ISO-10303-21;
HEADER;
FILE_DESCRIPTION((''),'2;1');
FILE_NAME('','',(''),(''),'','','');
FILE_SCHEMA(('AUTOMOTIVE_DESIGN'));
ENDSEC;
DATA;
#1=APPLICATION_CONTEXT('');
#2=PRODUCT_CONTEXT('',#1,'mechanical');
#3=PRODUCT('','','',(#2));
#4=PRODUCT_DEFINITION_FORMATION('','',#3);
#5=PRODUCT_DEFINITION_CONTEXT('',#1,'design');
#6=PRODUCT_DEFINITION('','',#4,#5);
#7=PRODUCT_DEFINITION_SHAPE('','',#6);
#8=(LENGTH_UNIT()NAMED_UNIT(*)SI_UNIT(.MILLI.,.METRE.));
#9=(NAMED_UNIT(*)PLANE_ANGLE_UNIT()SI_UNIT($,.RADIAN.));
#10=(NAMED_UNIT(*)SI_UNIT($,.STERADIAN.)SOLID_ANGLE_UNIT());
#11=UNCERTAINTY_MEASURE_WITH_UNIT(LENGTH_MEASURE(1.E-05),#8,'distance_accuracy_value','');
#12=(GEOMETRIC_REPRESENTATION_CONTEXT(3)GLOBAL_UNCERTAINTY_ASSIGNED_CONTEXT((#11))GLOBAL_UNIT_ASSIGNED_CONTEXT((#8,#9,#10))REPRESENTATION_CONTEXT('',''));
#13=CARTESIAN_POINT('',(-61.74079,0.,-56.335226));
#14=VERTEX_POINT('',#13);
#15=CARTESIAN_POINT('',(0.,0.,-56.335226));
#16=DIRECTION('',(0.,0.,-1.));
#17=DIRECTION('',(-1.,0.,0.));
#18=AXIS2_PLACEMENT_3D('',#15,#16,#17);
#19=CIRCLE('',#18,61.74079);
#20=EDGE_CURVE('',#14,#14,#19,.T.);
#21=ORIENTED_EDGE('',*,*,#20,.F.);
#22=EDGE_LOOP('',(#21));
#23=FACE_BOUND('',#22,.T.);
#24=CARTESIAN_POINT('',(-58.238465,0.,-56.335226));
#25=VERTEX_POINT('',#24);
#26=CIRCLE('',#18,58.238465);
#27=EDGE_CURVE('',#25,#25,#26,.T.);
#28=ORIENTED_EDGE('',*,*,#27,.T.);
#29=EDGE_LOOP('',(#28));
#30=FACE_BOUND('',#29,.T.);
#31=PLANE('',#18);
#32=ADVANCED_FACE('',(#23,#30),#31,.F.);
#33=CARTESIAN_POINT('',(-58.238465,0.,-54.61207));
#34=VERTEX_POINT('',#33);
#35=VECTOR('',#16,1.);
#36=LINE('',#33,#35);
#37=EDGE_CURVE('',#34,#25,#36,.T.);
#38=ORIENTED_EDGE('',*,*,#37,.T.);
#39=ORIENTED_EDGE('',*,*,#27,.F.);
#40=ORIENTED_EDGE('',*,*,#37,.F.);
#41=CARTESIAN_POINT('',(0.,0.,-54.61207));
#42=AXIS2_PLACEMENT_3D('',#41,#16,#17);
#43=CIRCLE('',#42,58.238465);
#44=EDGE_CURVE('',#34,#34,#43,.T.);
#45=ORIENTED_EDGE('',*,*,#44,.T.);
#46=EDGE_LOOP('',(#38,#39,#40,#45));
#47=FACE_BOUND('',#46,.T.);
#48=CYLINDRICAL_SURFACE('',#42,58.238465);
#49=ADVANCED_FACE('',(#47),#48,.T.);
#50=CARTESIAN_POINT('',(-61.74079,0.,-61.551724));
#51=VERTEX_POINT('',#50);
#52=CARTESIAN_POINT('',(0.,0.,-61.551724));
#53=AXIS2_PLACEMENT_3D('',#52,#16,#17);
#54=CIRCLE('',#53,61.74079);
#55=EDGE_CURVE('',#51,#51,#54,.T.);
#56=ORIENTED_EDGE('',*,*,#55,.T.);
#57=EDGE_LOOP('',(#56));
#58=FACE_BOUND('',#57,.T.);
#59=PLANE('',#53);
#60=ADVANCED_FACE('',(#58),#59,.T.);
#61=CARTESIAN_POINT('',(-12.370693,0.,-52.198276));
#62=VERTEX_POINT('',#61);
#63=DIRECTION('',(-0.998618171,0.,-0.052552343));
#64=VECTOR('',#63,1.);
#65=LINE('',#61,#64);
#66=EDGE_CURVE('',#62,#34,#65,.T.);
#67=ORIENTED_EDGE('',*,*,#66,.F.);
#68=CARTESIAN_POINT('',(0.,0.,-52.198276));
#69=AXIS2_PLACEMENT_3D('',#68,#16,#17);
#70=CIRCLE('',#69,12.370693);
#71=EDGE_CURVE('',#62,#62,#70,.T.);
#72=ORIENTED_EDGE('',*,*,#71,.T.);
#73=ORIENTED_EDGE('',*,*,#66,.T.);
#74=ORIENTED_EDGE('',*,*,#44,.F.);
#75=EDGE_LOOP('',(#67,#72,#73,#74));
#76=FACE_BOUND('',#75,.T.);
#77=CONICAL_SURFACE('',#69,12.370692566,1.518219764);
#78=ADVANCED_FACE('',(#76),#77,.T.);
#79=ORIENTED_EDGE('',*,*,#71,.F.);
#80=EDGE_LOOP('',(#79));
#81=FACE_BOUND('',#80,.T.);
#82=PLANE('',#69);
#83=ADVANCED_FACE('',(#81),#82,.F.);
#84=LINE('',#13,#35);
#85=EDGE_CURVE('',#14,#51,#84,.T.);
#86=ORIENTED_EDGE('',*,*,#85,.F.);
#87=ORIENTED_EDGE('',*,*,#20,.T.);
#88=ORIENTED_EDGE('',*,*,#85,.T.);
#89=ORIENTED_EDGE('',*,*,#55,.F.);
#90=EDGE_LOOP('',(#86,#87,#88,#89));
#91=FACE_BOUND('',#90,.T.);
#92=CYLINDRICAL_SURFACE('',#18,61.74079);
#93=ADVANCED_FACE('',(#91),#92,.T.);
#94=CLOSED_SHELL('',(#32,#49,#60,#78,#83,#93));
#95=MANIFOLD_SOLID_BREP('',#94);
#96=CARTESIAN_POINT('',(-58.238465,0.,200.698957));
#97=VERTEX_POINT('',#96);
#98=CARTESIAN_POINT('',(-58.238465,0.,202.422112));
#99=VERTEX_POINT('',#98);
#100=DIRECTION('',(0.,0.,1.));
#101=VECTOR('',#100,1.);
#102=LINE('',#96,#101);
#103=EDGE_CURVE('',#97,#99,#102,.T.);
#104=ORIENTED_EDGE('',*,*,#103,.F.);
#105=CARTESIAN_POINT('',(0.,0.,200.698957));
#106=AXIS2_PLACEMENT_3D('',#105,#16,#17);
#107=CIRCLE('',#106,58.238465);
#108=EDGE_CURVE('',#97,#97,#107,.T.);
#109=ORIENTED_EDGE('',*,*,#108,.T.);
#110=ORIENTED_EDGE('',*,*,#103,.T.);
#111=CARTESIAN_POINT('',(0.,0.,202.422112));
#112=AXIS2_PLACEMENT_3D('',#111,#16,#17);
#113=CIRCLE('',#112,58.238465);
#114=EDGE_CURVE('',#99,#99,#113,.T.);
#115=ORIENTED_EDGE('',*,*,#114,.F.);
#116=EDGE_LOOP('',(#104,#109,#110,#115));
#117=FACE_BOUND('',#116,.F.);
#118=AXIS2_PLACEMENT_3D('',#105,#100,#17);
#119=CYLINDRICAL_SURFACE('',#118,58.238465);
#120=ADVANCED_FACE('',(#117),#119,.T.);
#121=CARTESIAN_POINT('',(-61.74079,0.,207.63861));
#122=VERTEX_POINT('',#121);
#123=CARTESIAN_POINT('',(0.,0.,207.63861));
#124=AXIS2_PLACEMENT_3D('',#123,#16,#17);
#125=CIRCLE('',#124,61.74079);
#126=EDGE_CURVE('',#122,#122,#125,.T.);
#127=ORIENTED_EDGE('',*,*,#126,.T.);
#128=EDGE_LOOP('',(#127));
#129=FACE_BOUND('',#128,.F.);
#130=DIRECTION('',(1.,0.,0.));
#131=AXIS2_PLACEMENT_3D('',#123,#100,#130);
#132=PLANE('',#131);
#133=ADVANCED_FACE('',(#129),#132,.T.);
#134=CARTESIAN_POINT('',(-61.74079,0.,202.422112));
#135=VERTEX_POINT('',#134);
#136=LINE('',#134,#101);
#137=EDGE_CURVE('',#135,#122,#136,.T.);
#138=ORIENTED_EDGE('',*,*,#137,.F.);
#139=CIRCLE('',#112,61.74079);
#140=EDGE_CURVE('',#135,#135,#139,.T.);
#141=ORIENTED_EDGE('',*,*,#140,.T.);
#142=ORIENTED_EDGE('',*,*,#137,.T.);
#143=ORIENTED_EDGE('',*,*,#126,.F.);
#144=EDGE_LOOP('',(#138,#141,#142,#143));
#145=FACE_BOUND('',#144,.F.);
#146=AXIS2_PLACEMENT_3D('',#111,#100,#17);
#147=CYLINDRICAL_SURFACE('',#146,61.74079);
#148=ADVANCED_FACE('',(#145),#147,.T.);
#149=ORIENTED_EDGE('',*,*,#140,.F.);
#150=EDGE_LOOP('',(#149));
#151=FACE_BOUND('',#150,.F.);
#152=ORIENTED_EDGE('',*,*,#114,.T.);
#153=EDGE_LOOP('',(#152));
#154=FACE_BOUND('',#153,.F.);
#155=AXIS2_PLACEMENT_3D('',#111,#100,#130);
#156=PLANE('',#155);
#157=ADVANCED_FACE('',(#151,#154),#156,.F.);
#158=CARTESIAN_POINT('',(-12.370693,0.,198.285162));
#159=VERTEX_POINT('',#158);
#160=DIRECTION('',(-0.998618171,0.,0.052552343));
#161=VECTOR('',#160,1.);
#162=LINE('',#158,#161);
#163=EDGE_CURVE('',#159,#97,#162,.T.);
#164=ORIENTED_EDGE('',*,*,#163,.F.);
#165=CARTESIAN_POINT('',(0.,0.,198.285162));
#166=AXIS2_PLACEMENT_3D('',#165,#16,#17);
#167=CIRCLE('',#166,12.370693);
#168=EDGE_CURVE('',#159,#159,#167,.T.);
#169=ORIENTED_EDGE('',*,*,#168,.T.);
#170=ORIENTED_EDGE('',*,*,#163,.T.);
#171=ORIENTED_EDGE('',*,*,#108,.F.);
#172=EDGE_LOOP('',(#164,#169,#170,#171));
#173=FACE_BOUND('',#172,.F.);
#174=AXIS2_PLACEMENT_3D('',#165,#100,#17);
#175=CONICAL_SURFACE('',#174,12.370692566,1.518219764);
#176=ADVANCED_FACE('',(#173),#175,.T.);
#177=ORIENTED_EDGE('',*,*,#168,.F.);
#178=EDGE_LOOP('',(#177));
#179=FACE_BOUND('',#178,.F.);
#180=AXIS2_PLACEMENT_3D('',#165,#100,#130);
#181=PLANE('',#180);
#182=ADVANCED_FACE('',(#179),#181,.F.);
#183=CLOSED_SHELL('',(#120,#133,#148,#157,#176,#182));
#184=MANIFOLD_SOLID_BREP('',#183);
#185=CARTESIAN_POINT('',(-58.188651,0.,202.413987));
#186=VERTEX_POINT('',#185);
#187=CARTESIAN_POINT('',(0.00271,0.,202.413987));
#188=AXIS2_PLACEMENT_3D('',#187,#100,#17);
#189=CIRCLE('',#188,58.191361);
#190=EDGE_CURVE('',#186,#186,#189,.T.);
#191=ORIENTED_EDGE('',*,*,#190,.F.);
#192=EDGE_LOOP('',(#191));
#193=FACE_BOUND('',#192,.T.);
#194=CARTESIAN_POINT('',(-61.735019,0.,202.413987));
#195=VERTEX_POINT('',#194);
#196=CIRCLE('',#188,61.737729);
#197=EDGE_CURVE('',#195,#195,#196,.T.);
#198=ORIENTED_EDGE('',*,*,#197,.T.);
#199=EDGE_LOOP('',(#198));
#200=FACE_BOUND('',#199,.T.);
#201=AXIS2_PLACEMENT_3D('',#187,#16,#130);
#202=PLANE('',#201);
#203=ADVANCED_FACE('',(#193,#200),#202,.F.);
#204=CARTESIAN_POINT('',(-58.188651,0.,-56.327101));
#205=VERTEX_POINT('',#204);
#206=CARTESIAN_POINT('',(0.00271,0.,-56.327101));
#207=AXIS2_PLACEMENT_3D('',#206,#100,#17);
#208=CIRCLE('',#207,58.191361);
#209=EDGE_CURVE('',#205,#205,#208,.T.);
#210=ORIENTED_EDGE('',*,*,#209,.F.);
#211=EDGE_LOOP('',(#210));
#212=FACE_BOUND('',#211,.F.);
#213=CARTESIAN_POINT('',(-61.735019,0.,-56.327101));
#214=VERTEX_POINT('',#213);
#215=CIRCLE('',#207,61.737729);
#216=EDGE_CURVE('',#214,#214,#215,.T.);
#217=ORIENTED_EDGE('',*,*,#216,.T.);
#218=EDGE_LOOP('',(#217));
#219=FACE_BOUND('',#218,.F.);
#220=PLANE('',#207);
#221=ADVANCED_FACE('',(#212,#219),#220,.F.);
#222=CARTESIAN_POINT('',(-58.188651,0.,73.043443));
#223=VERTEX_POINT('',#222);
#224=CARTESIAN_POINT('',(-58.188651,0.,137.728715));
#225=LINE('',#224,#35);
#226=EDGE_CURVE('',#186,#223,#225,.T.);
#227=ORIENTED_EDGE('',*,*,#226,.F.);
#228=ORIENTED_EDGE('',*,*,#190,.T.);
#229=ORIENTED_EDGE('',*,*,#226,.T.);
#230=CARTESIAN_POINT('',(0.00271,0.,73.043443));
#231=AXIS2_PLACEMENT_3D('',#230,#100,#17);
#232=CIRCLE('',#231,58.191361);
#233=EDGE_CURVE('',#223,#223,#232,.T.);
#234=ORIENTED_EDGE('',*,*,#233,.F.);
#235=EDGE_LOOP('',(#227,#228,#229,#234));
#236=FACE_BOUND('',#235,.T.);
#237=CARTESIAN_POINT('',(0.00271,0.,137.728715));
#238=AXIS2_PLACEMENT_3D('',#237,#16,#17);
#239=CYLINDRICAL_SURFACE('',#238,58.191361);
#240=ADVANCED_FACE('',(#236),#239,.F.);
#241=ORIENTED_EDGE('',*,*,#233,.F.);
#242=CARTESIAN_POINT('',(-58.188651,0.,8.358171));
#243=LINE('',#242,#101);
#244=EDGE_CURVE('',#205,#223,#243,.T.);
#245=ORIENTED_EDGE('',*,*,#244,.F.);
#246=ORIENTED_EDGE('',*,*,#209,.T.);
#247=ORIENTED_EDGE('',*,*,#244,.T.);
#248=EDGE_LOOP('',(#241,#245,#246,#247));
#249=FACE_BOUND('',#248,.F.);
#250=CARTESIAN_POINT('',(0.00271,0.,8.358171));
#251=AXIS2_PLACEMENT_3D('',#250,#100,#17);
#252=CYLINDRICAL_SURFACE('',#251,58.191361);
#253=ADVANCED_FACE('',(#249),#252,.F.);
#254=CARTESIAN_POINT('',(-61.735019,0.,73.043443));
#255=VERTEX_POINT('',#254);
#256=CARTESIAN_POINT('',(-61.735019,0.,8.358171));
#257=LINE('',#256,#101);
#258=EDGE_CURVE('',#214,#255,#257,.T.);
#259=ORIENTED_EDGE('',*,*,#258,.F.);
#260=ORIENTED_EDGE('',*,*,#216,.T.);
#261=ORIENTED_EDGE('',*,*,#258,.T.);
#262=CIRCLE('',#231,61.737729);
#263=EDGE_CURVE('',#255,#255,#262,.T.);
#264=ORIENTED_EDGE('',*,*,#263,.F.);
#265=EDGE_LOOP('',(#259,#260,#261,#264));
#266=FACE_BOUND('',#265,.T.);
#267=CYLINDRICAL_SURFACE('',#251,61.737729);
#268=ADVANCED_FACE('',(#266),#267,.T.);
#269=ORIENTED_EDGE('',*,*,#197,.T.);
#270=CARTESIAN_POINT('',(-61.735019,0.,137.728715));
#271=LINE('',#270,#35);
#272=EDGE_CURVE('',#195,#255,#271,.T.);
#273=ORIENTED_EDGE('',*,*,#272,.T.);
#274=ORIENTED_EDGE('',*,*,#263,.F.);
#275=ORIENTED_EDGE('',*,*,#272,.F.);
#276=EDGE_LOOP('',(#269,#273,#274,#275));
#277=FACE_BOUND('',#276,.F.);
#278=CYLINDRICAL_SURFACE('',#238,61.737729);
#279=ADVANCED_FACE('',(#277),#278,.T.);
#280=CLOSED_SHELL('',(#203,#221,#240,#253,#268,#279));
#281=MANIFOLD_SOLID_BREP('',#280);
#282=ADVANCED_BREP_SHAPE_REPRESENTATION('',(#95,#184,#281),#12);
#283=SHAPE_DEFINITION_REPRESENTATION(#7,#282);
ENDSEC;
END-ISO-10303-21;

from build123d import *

# Parameters (mm, degrees)
F2_W = 3.5463683307
F2_H = 129.3705441058


with BuildPart() as f1:
    # F0 (on Front) → F1 (revolve)
    with BuildSketch(Plane.XZ):
        Polygon((0, -61.5517236292), (0, -54.612070322), (-58.2384653389, -54.612070322), (-58.2384653389, -56.3352257013), (-61.7407895625, -56.3352257013), (-61.7407895625, -61.5517236292), align=None)
        Polygon((-58.2384653389, -54.612070322), (0, -54.612070322), (0, -52.1982759237), (-12.370692566, -52.1982759237), align=None)
    revolve(axis=Axis((0, 0, -58.0818969756), (0, 0, -1)))


with BuildPart() as f3:
    # F2 (on Front) → F3 (revolve)
    with BuildSketch(Plane.XZ):
        with Locations((-59.9618349224, 8.3581712097)):
            Rectangle(F2_W, F2_H)
    revolve(axis=Axis((0.0027101487, 0, 8.6135864258), (0, 0, 1)))

    # F5: F3 across face


with BuildPart() as f4_1:
    # F4: instance of F1
    add(f1.part.mirror(Plane(origin=(0.0027101487, 0, 73.0434432626), x_dir=(1, 0, 0), z_dir=(0, 0, 1))))


with BuildPart() as f3_1:
    add(f3.part)
    add(f3.part.mirror(Plane(origin=(0.0027101487, 0, 73.0434432626), x_dir=(1, 0, 0), z_dir=(0, 0, 1))))


solid = Compound([f1.part, f4_1.part, f3_1.part])
